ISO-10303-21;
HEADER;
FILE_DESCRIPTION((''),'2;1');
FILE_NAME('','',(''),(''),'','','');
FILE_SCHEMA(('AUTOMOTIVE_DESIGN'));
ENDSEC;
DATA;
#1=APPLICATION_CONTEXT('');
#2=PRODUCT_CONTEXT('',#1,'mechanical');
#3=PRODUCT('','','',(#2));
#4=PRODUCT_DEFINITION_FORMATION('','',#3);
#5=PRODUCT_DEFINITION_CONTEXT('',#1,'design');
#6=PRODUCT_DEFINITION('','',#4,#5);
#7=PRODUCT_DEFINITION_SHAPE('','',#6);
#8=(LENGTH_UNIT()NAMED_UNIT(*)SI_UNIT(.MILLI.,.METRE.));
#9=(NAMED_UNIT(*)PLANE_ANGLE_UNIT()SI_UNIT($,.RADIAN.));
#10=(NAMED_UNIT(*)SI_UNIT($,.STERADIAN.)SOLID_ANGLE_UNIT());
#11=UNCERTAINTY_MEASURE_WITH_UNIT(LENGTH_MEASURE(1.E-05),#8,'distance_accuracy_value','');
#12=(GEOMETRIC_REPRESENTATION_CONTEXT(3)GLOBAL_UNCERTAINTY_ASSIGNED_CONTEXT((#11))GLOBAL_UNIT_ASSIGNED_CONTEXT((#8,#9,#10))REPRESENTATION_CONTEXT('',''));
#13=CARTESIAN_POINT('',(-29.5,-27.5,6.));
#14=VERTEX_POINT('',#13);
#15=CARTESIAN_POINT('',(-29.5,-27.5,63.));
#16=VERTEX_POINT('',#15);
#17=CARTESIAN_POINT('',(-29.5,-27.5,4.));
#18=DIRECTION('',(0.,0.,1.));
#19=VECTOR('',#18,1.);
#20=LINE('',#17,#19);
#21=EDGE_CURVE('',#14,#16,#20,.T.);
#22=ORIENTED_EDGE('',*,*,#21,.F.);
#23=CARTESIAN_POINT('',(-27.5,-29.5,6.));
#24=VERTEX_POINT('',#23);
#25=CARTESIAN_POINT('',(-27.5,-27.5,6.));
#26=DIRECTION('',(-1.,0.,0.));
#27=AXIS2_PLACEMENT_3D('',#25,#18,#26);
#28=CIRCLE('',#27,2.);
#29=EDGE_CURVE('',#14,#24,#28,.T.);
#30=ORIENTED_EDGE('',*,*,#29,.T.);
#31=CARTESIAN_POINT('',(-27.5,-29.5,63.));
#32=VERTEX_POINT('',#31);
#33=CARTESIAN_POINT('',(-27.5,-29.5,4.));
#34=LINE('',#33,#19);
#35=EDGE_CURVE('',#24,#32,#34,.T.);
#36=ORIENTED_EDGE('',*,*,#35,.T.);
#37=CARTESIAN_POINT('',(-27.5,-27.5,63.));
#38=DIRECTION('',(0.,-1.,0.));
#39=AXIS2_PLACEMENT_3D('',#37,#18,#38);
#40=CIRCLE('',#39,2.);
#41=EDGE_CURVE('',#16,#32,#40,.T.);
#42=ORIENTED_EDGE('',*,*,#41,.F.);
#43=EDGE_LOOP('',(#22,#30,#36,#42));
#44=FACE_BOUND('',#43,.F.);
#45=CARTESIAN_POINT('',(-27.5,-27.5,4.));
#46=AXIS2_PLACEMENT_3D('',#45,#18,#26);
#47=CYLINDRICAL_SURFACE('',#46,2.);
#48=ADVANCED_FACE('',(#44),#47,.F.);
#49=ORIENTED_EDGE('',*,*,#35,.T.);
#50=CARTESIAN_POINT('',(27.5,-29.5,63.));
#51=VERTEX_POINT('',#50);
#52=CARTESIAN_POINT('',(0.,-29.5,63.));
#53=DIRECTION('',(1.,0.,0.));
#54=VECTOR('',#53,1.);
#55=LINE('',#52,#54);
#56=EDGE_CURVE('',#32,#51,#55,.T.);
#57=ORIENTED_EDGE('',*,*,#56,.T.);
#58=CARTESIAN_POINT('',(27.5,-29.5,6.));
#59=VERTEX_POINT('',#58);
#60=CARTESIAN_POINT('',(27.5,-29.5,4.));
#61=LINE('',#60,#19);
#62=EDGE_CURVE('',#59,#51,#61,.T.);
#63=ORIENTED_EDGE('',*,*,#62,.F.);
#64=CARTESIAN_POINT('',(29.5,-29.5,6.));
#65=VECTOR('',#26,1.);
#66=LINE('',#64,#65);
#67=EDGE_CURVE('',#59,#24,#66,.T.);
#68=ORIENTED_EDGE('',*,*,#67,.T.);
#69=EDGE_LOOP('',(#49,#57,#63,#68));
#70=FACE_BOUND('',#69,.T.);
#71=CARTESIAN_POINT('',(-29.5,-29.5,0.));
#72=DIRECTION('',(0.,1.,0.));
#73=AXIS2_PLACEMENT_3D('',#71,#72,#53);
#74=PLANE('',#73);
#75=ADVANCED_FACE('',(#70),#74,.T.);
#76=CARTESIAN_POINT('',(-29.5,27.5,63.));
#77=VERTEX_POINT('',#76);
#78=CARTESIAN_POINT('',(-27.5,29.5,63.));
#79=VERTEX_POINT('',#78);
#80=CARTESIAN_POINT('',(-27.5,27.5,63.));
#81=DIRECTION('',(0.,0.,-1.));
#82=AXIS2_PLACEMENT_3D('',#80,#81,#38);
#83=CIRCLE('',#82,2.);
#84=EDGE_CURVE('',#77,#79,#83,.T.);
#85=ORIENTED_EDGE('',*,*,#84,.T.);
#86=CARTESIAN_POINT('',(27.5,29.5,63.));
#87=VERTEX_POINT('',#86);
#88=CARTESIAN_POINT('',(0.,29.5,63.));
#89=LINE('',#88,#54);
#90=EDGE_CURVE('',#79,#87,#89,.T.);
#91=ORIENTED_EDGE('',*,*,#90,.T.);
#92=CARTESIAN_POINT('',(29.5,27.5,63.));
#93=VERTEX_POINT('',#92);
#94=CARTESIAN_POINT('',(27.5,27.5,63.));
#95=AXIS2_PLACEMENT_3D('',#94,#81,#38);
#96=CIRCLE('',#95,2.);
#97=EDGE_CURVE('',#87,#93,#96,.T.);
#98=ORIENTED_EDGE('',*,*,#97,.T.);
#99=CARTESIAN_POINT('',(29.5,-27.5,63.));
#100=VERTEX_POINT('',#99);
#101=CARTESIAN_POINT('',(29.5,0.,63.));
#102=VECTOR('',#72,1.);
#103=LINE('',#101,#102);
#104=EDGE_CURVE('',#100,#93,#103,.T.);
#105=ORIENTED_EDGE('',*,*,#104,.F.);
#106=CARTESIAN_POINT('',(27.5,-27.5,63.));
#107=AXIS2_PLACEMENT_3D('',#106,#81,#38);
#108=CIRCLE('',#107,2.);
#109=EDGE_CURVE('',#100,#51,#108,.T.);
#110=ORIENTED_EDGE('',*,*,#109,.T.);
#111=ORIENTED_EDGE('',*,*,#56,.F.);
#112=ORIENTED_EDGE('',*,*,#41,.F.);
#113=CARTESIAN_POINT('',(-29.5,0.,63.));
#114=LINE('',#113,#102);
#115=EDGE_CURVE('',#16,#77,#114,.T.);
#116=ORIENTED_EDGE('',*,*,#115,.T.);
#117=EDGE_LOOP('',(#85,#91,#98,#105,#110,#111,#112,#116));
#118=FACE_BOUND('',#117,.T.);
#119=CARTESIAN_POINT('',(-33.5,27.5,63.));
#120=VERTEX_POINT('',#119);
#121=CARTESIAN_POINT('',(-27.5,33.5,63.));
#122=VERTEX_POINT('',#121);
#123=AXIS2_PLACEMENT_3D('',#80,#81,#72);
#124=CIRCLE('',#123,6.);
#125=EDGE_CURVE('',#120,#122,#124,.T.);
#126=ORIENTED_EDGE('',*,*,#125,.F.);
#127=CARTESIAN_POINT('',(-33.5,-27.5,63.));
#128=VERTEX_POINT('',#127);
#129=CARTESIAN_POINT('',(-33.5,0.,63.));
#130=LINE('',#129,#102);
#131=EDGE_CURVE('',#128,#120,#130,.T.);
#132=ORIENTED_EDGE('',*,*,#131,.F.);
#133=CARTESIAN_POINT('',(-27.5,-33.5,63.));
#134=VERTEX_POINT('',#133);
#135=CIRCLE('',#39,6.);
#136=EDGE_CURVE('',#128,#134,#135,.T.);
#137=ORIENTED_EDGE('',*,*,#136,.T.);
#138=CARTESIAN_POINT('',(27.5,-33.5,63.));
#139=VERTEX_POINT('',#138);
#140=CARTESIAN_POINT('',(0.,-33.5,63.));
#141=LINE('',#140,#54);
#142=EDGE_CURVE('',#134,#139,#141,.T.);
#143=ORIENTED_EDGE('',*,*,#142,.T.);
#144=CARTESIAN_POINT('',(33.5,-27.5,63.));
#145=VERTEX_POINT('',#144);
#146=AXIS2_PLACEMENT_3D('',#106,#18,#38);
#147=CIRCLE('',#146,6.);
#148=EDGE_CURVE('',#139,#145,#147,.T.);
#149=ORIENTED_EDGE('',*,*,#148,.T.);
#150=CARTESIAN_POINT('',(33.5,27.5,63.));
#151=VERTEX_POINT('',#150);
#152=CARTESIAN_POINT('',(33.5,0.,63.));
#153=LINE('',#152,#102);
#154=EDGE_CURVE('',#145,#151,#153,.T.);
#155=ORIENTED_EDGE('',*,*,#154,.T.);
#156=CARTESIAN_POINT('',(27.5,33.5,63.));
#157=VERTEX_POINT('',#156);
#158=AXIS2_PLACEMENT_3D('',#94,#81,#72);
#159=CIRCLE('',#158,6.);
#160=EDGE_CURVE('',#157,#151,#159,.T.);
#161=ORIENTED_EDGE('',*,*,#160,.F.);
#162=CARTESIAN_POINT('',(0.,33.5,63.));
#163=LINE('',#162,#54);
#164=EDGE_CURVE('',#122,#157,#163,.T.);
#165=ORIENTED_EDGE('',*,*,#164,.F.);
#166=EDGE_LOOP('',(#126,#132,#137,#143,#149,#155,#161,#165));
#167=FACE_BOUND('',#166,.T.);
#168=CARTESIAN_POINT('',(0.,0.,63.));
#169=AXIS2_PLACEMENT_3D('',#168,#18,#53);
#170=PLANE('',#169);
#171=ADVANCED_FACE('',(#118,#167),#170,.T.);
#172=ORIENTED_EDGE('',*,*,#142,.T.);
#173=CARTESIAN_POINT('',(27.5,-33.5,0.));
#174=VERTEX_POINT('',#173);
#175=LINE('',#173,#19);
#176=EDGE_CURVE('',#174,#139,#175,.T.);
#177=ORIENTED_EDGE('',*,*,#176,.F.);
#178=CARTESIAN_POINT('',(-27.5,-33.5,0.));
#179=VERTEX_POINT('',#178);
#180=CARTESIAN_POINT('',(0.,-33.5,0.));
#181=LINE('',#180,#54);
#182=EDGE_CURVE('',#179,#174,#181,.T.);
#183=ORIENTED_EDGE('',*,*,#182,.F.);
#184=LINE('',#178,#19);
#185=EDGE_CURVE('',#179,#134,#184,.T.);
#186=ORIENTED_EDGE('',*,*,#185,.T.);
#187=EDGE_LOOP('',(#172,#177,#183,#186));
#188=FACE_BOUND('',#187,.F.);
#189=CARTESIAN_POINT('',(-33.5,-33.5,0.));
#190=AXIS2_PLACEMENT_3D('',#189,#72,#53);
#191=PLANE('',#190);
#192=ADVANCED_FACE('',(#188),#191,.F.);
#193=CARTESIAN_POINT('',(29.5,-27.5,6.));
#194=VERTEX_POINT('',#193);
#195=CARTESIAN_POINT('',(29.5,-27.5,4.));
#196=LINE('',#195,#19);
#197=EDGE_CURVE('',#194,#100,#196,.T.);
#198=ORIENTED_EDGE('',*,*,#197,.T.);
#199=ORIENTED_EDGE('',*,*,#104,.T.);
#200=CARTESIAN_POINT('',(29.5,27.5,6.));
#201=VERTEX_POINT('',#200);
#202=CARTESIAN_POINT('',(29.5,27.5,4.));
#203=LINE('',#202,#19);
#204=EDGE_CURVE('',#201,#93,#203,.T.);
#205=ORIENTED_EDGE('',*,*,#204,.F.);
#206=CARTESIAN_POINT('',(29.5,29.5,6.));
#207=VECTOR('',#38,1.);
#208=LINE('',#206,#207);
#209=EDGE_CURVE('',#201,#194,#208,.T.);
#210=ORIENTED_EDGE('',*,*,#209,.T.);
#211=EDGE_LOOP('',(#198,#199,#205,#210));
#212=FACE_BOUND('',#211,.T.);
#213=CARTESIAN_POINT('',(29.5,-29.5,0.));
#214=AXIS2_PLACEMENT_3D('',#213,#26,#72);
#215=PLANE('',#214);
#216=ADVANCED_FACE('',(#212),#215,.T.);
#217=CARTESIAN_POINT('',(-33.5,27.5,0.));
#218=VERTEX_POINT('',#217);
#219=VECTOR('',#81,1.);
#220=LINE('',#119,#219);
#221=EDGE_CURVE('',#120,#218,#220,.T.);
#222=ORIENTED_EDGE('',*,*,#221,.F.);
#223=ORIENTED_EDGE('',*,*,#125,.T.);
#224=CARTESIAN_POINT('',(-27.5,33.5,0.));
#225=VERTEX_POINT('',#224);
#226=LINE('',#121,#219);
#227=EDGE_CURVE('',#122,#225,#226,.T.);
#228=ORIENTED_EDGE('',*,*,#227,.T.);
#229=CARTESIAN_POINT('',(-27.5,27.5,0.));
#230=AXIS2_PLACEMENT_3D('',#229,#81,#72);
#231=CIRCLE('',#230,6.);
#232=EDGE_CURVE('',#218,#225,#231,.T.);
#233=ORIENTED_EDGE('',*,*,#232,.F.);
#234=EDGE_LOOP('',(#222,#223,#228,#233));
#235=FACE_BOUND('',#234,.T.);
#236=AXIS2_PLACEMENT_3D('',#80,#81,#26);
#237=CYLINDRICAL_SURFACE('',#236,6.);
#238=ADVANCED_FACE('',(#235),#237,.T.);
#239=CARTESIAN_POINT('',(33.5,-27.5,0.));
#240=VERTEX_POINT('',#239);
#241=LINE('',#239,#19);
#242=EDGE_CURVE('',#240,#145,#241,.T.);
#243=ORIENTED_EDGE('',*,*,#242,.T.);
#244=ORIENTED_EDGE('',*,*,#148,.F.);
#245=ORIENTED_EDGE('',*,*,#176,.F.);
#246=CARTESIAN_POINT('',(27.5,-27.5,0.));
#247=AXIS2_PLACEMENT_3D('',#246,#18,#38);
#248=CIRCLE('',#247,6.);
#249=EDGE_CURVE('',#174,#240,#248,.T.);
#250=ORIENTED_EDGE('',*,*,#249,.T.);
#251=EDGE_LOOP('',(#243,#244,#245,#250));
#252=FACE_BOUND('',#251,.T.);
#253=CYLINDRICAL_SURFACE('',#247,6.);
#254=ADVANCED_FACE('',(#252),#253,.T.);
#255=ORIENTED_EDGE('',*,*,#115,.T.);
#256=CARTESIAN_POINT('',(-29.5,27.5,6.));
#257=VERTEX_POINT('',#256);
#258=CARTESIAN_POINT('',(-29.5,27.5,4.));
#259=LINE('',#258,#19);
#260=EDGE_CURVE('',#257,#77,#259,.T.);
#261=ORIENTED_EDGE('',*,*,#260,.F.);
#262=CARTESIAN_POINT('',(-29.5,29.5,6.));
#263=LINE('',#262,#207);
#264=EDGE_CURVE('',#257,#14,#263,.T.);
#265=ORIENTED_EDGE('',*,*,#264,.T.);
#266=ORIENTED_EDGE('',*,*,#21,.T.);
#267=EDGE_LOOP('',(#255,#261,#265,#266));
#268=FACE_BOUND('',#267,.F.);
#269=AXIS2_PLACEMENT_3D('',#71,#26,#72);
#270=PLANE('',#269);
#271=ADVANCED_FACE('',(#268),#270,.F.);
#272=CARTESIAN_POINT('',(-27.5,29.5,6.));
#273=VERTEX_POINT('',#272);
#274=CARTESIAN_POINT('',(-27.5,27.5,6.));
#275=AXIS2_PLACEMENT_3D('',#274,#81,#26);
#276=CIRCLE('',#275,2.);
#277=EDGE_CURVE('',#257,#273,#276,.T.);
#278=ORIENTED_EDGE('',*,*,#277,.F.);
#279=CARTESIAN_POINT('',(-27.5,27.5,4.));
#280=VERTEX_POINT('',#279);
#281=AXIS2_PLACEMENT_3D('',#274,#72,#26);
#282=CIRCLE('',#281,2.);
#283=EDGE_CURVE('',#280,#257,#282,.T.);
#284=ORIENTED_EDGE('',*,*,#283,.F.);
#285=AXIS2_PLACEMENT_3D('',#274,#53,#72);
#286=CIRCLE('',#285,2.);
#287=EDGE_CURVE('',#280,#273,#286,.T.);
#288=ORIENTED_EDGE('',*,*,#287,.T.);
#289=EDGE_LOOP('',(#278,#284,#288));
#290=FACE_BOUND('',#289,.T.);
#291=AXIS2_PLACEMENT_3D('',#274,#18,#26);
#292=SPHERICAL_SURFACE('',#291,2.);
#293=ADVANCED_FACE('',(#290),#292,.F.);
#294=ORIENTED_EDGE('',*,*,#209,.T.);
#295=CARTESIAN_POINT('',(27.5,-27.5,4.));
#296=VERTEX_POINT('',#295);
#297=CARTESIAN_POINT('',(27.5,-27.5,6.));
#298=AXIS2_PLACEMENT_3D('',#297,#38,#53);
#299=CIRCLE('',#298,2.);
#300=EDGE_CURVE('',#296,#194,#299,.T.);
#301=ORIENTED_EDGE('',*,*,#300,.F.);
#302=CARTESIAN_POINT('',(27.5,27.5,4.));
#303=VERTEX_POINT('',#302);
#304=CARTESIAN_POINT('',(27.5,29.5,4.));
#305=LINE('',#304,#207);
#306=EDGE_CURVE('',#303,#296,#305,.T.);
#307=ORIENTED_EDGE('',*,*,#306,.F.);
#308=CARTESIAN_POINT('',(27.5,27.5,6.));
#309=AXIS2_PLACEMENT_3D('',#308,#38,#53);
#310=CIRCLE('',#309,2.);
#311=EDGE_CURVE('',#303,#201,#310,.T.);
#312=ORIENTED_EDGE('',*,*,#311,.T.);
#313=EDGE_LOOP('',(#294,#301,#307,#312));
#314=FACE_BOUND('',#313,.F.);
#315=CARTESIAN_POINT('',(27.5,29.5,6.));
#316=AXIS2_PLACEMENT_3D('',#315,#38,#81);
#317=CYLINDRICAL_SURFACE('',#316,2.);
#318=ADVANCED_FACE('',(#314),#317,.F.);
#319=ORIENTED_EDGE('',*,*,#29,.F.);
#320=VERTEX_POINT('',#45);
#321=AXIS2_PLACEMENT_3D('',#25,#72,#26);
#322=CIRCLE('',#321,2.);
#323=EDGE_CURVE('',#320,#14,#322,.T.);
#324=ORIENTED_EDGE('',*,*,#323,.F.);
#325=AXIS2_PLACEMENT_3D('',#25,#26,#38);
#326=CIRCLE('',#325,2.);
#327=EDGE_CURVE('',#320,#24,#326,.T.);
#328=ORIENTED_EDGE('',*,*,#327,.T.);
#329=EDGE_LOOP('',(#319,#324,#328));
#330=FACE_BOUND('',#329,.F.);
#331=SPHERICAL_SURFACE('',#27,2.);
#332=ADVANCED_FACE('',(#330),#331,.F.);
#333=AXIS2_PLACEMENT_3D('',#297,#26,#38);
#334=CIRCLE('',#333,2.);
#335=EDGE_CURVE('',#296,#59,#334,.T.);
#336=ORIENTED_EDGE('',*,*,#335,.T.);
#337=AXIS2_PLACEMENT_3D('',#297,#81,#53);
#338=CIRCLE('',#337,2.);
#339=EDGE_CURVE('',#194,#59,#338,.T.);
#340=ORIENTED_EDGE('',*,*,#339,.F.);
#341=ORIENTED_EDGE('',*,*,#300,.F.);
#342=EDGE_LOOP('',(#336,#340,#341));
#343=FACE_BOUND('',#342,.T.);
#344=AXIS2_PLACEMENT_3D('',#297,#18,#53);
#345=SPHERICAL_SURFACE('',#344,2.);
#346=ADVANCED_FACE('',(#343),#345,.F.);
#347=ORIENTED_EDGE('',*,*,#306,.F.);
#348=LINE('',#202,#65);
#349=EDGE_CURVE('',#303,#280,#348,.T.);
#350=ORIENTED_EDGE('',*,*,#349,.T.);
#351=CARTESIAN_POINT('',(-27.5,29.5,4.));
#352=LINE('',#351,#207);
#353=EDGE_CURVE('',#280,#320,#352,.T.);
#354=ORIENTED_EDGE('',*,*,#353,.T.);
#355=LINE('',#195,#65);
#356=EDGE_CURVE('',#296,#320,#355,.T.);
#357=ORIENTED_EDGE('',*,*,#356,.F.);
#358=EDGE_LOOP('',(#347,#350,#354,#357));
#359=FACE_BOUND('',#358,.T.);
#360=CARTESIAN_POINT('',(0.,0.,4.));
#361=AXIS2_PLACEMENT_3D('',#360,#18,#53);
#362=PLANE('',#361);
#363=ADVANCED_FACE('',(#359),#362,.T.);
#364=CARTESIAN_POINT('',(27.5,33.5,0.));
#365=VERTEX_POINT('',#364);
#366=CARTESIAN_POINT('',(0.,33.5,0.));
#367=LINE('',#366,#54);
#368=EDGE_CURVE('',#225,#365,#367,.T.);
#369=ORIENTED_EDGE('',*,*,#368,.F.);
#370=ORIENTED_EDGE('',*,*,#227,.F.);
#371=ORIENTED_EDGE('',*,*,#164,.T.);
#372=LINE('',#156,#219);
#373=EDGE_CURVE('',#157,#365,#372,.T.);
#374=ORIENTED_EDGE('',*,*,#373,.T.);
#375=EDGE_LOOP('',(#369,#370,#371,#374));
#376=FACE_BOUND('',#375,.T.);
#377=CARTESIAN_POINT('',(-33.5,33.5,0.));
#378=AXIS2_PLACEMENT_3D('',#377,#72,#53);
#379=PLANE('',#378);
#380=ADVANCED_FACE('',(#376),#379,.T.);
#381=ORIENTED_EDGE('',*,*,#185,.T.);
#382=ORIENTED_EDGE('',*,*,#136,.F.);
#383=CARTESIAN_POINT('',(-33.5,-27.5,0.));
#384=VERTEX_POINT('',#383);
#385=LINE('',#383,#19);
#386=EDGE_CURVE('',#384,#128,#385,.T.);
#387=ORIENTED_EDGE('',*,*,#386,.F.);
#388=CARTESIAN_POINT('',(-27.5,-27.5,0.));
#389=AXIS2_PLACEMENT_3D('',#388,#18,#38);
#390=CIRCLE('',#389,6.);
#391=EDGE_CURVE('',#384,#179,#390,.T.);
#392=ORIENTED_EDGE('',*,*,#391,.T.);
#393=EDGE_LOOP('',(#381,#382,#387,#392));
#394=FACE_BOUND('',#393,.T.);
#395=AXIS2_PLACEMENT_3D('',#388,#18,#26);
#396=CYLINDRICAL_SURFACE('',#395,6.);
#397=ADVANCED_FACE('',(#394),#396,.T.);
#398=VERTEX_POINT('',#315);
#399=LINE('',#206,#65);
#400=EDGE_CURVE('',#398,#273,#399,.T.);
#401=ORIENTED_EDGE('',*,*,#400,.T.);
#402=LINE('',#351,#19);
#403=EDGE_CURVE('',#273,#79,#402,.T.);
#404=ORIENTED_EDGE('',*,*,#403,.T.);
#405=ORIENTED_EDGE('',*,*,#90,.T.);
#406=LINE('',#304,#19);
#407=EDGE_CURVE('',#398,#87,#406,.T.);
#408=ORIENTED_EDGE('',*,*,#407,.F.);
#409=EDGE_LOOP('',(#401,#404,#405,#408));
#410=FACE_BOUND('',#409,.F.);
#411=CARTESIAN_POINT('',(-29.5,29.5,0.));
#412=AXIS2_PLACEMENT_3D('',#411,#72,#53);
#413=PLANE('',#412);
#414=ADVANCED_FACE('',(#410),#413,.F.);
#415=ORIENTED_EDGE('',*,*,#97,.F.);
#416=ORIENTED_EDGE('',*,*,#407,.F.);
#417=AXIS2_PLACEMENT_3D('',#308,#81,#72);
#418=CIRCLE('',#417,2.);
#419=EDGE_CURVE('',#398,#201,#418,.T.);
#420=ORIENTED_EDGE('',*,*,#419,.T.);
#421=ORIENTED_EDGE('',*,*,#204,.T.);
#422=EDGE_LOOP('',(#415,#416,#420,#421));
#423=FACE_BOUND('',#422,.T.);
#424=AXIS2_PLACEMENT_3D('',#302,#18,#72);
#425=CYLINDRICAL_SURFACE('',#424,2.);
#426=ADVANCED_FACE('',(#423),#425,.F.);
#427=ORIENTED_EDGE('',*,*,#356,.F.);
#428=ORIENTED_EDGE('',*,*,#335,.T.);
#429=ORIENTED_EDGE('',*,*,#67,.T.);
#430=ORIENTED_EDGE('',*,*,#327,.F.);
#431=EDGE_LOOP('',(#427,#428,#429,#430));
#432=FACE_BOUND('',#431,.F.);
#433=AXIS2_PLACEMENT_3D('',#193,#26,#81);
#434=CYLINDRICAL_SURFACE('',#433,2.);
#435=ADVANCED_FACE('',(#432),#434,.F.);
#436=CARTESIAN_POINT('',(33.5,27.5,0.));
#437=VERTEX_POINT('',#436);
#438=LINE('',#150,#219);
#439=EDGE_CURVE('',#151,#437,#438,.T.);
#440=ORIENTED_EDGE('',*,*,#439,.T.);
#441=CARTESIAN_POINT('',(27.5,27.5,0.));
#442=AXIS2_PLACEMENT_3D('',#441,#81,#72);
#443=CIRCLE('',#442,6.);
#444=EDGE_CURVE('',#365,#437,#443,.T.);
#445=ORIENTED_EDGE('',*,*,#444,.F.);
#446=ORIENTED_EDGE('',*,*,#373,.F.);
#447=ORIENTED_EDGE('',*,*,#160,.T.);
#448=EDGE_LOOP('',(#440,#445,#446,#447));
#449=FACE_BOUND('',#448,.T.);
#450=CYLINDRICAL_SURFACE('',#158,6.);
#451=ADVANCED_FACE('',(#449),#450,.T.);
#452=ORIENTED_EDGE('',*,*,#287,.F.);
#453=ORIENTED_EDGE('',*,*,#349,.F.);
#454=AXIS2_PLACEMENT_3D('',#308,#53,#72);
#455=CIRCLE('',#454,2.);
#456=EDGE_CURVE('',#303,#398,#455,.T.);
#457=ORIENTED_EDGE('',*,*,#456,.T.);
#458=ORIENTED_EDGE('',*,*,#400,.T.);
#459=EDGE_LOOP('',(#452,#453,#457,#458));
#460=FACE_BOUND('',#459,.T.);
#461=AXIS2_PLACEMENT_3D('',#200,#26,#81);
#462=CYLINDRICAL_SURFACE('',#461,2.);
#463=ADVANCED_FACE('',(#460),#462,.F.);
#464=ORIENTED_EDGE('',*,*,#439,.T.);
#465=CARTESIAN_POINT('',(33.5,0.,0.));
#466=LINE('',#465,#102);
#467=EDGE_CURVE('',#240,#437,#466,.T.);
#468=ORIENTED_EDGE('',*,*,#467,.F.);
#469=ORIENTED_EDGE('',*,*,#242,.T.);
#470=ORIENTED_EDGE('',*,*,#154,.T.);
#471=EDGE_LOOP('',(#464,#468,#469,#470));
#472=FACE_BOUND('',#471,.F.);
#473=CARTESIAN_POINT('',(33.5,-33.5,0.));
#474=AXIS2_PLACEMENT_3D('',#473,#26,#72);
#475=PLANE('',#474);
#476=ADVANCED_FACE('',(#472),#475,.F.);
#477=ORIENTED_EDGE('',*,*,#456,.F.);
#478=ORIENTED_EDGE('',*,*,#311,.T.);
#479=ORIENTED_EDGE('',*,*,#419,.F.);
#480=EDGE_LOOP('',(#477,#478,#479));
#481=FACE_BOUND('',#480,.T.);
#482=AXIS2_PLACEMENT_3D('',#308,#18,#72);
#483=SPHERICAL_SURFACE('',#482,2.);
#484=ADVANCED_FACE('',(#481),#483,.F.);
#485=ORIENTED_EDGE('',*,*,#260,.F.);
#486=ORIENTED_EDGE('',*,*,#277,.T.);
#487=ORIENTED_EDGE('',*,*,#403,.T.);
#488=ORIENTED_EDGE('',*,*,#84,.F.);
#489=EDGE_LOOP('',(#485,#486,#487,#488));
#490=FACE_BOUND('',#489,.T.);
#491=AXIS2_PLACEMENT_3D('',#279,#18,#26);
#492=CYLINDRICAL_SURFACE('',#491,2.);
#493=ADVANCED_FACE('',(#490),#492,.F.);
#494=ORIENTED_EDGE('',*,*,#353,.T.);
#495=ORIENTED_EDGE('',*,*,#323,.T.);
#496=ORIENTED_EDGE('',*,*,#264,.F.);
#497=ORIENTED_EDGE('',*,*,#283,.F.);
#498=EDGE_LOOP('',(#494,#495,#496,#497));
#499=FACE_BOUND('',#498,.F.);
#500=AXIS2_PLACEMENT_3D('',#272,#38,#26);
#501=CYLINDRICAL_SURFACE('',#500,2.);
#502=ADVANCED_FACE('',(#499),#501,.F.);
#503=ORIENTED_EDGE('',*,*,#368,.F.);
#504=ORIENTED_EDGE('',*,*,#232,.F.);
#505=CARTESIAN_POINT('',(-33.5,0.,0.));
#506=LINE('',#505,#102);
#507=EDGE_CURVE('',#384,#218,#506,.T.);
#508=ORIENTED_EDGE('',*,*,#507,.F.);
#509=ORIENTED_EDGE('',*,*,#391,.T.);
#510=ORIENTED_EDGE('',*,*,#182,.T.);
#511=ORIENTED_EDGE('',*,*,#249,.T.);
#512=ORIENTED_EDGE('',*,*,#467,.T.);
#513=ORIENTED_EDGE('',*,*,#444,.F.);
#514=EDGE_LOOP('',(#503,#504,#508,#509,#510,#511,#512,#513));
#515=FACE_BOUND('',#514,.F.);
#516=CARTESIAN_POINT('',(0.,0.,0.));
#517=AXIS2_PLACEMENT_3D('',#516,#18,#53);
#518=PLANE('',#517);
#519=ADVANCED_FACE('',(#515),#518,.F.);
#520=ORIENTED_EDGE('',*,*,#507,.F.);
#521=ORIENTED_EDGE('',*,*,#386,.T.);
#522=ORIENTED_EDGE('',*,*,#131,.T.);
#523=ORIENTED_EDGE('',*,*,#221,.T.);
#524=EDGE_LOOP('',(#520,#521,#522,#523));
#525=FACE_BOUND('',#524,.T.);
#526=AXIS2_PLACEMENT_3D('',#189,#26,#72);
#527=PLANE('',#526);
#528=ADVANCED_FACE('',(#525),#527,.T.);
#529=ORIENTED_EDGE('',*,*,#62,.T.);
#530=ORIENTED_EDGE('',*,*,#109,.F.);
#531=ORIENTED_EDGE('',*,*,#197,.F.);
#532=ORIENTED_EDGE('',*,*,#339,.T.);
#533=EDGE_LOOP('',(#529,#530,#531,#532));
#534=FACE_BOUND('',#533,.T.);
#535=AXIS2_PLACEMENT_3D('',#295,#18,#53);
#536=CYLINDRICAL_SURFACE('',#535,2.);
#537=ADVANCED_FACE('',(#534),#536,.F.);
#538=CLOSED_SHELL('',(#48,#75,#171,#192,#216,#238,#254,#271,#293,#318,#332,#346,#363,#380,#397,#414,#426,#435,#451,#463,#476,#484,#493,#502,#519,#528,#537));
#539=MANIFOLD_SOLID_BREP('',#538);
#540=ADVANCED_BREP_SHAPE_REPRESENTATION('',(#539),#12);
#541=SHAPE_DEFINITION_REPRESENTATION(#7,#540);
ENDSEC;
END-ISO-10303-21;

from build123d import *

# Parameters (mm, degrees)
F0_W     = 67
F0_H     = 67
F0_W_2   = 59
F0_H_2   = 59
F1_DEPTH = 4
F2_DEPTH = 63
F3_R     = 2
F4_R     = 6


with BuildPart() as f1:
    # F0 (on Top) → F1 (new body)
    with BuildSketch(Plane.XY):
        Rectangle(F0_W, F0_H)
        Rectangle(F0_W_2, F0_H_2, mode=Mode.SUBTRACT)
        Rectangle(F0_W_2, F0_H_2)
    extrude(amount=F1_DEPTH)

    # F0 (on Top) → F2 (join)
    with BuildSketch(Plane.XY):
        Rectangle(F0_W, F0_H)
        Rectangle(F0_W_2, F0_H_2, mode=Mode.SUBTRACT)
    extrude(amount=F2_DEPTH)

    # F3
    f3_edges = [f1.edges().sort_by_distance(p)[0] for p in [
        (29.5, -29.5, 33.5),
        (-29.5, -29.5, 33.5),
        (-29.5, 29.5, 33.5),
        (29.5, 29.5, 33.5),
        (-29.5, 0, 4),
        (0, 29.5, 4),
        (29.5, 0, 4),
        (0, -29.5, 4),
    ]]
    fillet(f3_edges, radius=F3_R)

    # F4
    f4_edges = [f1.edges().sort_by_distance(p)[0] for p in [
        (-33.5, 33.5, 31.5),
        (-33.5, -33.5, 31.5),
        (33.5, -33.5, 31.5),
        (33.5, 33.5, 31.5),
    ]]
    fillet(f4_edges, radius=F4_R)


solid = f1.part
